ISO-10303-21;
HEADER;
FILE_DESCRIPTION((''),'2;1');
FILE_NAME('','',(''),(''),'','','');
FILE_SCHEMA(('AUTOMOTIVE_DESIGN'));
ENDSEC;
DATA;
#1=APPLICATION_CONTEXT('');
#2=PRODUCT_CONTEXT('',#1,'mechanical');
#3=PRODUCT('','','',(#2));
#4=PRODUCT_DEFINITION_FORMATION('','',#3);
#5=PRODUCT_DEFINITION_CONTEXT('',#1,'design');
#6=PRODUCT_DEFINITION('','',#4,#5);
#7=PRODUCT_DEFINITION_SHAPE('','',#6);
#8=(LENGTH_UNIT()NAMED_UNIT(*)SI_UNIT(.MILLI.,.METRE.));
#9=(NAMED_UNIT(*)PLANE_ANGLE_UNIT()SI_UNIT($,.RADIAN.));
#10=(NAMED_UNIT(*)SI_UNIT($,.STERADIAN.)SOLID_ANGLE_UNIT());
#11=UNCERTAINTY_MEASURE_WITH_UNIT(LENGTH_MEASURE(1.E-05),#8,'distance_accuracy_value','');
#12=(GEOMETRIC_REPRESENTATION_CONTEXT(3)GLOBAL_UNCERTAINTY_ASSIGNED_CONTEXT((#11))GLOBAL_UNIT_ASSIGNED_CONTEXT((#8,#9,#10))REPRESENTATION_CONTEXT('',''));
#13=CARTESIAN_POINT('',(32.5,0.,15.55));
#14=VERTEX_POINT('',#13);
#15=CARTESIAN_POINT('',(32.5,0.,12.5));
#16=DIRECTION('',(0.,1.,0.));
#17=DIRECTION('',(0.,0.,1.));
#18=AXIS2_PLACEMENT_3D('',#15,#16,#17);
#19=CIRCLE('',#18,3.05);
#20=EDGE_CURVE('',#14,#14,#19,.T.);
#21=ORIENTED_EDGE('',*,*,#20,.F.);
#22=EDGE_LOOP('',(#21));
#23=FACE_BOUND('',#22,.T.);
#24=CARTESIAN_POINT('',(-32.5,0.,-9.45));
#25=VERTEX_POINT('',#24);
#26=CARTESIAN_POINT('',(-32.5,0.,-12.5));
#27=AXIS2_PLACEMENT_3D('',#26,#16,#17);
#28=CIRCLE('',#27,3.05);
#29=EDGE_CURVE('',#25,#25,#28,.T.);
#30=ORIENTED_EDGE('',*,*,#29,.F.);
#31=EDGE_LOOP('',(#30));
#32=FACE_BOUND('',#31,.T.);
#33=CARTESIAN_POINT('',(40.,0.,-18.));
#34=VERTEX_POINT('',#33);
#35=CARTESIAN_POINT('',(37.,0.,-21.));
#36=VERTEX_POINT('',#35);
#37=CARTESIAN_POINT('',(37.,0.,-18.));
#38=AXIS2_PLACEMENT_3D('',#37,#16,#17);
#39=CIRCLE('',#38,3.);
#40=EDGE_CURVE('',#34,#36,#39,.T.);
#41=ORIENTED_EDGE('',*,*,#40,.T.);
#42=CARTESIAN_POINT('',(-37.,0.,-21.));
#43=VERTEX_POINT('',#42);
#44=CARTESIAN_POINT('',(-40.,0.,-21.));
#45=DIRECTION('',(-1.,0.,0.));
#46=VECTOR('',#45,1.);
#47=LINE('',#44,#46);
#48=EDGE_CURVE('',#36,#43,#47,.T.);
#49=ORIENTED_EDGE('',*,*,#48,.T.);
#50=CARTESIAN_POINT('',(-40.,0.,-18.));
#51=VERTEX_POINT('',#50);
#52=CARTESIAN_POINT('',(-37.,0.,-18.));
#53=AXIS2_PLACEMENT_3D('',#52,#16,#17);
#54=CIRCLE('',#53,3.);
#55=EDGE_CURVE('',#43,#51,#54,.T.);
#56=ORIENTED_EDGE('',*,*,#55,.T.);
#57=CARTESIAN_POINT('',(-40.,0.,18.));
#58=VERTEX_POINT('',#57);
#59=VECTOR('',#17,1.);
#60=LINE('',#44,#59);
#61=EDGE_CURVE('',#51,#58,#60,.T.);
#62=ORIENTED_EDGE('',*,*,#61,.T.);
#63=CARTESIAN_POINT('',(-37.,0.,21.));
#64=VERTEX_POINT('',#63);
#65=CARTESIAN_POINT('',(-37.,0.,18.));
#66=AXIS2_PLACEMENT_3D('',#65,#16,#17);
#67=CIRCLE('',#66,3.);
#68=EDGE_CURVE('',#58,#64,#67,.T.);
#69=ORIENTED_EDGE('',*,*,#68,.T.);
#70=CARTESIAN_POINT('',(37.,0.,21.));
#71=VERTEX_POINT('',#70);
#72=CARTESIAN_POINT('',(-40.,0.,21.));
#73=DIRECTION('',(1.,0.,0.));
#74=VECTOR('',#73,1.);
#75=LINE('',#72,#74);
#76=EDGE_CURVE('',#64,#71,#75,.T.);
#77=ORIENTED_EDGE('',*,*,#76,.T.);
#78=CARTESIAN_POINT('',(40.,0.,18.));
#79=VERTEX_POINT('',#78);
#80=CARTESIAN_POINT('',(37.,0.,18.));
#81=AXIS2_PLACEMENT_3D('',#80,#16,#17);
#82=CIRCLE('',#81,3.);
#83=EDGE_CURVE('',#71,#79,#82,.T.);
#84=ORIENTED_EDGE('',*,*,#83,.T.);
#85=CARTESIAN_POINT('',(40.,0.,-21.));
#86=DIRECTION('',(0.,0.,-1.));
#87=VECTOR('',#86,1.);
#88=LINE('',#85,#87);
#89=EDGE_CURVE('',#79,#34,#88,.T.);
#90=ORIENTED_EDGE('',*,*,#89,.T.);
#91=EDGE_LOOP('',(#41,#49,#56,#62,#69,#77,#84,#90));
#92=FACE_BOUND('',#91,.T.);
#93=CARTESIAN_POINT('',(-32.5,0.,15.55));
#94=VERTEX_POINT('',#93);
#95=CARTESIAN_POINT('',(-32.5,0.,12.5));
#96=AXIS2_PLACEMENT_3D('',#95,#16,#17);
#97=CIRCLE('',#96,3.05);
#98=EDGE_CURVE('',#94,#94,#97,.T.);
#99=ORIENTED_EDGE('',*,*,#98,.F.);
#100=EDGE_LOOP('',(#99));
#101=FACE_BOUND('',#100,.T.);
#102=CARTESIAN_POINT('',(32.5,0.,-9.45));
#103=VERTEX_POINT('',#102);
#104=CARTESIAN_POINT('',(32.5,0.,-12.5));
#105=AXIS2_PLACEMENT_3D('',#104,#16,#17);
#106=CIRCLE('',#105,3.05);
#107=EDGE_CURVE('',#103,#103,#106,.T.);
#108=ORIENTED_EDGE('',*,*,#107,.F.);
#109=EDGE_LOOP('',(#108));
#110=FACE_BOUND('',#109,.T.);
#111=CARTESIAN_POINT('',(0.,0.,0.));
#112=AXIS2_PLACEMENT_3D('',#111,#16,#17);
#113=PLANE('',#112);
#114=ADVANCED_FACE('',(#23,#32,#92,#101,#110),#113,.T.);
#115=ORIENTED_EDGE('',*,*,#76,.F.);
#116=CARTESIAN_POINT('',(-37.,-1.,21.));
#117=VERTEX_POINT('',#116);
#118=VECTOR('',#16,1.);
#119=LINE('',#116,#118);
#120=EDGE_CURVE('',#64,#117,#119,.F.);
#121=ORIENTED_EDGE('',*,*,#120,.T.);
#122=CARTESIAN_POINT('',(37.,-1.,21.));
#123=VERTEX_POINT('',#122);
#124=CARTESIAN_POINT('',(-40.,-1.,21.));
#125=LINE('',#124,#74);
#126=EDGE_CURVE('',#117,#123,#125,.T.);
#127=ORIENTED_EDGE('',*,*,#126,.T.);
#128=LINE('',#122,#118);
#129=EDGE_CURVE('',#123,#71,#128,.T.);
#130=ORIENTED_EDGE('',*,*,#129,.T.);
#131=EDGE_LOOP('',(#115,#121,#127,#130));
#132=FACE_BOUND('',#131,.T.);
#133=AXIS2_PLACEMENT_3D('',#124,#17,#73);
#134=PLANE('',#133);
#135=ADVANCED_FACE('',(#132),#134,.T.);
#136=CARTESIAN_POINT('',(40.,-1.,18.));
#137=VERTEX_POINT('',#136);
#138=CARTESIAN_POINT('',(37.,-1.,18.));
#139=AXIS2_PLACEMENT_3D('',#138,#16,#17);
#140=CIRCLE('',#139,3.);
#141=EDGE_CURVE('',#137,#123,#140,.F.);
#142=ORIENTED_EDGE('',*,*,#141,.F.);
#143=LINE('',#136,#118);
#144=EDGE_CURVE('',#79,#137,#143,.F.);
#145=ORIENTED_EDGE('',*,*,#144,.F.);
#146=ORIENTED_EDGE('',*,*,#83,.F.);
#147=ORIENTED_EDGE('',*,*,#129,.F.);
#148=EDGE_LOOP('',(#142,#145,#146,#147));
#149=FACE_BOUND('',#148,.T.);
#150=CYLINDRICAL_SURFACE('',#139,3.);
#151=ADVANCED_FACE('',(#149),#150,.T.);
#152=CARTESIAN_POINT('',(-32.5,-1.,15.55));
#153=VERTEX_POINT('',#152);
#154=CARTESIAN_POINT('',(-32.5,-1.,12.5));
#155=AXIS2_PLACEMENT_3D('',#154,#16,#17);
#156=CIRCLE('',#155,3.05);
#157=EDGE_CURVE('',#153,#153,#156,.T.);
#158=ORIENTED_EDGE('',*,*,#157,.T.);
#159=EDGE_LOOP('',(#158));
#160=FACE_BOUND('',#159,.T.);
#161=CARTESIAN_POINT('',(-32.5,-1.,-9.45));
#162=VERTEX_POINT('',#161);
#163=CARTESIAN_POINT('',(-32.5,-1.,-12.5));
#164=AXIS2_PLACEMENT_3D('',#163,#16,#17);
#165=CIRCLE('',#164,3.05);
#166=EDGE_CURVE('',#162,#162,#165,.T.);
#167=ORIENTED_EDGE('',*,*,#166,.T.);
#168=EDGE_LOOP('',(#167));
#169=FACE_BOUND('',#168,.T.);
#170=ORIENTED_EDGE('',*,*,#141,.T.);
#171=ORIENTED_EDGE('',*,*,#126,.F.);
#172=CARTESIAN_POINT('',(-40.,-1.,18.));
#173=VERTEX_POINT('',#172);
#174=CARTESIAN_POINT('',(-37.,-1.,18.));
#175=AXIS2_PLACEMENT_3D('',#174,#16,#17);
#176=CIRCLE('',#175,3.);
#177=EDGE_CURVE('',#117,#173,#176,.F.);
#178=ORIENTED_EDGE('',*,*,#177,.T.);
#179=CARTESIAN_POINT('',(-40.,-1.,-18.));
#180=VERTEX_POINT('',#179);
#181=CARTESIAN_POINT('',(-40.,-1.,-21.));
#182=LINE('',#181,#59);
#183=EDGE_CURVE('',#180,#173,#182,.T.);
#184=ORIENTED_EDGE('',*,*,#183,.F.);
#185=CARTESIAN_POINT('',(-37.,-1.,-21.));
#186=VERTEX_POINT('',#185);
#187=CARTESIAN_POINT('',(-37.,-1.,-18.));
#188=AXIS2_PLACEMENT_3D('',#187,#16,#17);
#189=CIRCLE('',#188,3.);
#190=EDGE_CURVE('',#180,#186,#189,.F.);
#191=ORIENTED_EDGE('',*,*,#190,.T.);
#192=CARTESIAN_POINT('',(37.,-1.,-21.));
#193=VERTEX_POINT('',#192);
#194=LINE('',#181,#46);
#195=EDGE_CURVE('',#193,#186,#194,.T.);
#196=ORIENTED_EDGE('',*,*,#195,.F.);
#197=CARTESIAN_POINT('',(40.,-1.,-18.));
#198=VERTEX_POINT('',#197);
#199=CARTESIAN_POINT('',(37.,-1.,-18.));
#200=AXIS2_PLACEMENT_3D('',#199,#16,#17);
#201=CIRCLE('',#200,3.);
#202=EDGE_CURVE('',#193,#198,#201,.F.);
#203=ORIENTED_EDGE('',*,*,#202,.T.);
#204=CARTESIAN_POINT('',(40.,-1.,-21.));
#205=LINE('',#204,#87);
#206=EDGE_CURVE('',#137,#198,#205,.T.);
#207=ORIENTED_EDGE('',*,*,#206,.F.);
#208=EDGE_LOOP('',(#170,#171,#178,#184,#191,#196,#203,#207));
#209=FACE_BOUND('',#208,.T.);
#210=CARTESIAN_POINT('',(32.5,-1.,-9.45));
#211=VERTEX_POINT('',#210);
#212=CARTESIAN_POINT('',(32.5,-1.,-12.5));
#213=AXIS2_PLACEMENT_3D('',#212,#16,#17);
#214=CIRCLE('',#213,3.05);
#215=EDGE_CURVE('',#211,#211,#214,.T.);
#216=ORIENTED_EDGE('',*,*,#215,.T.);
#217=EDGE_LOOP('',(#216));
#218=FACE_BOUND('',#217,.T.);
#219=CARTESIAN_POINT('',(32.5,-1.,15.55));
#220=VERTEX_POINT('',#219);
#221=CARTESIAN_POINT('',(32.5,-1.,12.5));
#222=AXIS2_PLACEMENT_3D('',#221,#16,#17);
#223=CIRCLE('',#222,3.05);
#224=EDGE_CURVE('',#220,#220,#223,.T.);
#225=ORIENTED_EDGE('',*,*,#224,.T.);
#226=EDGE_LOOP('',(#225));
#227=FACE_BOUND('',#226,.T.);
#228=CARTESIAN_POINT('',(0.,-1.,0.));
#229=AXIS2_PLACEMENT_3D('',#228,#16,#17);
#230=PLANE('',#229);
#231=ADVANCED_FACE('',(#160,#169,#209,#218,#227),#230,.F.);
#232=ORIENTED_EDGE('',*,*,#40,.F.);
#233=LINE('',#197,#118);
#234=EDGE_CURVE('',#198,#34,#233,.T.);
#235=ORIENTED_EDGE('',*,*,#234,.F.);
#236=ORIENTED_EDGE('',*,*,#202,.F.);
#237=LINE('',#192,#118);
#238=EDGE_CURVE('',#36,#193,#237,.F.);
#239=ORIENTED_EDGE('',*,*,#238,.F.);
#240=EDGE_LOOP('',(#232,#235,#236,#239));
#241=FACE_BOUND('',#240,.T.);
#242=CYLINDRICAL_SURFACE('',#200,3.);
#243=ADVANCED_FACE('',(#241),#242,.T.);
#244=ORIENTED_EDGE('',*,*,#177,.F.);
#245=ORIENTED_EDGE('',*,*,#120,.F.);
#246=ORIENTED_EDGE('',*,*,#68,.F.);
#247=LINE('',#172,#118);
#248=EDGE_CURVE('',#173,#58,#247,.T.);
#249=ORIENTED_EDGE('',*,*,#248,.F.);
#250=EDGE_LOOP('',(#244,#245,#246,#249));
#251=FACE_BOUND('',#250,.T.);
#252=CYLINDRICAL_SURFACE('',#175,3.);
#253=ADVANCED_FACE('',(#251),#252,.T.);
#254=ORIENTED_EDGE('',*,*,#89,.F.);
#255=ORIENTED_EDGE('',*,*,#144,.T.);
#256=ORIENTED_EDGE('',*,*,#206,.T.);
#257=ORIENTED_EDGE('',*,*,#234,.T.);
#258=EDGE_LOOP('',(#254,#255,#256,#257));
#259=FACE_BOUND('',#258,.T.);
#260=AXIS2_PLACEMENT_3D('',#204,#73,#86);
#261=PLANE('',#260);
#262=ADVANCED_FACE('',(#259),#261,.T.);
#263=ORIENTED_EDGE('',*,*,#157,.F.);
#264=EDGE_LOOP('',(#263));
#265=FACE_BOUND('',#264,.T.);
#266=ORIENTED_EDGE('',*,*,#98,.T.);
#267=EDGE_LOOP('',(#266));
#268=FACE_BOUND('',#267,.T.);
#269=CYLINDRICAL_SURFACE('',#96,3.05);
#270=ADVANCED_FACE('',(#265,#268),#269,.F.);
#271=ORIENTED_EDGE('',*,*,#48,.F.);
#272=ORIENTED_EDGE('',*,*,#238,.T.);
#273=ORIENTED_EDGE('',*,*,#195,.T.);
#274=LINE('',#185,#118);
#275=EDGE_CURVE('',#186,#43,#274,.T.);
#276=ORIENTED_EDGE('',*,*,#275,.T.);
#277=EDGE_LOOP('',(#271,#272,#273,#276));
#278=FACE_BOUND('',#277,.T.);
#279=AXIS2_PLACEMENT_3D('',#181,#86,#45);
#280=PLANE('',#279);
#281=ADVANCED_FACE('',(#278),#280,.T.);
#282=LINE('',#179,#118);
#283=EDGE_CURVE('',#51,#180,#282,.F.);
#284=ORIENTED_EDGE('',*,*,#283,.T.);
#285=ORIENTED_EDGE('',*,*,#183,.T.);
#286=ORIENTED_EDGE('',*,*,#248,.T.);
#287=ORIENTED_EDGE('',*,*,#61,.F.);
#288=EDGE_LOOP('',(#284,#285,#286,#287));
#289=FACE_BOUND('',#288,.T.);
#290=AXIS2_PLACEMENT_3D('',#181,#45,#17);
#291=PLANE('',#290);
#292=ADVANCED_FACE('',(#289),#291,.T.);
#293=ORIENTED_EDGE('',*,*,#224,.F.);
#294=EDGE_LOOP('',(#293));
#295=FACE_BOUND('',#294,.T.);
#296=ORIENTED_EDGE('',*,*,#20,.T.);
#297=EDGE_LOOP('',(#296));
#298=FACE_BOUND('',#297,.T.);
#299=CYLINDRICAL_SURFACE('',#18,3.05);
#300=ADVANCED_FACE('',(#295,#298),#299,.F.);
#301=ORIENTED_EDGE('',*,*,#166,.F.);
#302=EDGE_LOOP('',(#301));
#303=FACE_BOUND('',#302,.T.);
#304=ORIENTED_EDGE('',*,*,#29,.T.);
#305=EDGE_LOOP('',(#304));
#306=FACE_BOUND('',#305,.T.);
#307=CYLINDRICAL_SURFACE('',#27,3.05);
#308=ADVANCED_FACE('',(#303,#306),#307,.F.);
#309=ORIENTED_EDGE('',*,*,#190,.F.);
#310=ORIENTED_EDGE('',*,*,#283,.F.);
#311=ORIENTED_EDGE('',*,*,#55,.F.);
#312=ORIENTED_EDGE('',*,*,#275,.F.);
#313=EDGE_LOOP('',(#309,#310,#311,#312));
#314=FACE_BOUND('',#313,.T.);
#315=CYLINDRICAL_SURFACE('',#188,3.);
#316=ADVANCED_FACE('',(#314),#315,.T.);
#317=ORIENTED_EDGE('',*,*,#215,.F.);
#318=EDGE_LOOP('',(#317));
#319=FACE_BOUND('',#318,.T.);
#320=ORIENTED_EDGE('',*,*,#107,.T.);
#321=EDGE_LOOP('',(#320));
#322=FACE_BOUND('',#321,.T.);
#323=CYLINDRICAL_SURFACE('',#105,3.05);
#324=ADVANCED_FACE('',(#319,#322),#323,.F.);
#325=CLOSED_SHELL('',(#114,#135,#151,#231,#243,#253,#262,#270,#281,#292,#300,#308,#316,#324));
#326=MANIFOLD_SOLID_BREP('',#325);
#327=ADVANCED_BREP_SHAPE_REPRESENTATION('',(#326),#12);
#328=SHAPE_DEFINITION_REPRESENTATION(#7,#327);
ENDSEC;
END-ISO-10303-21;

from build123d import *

# Parameters (mm, degrees)
SKETCH_1_W              = 80
SKETCH_1_H              = 42
SM_BASE_FLANGE_1_DEPTH  = 1
FILLET_1_R              = 3
HOLE_WIZARD_6_2_6_2_1_D = 6.1


# Sheet-metal steps are written as plain solids
with BuildPart() as part:
    # Sketch 1 → Базовая кромка1 (new body)
    with BuildSketch(Plane(origin=(0, 0, 0), x_dir=(1, 0, 0), z_dir=(0, 1, 0))):
        Rectangle(SKETCH_1_W, SKETCH_1_H)
    extrude(amount=-SM_BASE_FLANGE_1_DEPTH)

    # Скругление1
    fillet_1_edges = [part.edges().sort_by_distance(p)[0] for p in [
        (40, -0.5, 21),
        (-40, -0.5, 21),
        (-40, -0.5, -21),
        (40, -0.5, -21),
    ]]
    fillet(fillet_1_edges, radius=FILLET_1_R)

    # Диаметр отверстия Ø6.2 (6.2)1 (through all)
    with Locations(Plane(origin=(0, 0, 0), x_dir=(1, 0, 0), z_dir=(0, 1, 0))):
        with Locations((-32.5, 12.5), (-32.5, -12.5), (32.5, -12.5), (32.5, 12.5)):
            Hole(HOLE_WIZARD_6_2_6_2_1_D / 2)


solid = part.part
